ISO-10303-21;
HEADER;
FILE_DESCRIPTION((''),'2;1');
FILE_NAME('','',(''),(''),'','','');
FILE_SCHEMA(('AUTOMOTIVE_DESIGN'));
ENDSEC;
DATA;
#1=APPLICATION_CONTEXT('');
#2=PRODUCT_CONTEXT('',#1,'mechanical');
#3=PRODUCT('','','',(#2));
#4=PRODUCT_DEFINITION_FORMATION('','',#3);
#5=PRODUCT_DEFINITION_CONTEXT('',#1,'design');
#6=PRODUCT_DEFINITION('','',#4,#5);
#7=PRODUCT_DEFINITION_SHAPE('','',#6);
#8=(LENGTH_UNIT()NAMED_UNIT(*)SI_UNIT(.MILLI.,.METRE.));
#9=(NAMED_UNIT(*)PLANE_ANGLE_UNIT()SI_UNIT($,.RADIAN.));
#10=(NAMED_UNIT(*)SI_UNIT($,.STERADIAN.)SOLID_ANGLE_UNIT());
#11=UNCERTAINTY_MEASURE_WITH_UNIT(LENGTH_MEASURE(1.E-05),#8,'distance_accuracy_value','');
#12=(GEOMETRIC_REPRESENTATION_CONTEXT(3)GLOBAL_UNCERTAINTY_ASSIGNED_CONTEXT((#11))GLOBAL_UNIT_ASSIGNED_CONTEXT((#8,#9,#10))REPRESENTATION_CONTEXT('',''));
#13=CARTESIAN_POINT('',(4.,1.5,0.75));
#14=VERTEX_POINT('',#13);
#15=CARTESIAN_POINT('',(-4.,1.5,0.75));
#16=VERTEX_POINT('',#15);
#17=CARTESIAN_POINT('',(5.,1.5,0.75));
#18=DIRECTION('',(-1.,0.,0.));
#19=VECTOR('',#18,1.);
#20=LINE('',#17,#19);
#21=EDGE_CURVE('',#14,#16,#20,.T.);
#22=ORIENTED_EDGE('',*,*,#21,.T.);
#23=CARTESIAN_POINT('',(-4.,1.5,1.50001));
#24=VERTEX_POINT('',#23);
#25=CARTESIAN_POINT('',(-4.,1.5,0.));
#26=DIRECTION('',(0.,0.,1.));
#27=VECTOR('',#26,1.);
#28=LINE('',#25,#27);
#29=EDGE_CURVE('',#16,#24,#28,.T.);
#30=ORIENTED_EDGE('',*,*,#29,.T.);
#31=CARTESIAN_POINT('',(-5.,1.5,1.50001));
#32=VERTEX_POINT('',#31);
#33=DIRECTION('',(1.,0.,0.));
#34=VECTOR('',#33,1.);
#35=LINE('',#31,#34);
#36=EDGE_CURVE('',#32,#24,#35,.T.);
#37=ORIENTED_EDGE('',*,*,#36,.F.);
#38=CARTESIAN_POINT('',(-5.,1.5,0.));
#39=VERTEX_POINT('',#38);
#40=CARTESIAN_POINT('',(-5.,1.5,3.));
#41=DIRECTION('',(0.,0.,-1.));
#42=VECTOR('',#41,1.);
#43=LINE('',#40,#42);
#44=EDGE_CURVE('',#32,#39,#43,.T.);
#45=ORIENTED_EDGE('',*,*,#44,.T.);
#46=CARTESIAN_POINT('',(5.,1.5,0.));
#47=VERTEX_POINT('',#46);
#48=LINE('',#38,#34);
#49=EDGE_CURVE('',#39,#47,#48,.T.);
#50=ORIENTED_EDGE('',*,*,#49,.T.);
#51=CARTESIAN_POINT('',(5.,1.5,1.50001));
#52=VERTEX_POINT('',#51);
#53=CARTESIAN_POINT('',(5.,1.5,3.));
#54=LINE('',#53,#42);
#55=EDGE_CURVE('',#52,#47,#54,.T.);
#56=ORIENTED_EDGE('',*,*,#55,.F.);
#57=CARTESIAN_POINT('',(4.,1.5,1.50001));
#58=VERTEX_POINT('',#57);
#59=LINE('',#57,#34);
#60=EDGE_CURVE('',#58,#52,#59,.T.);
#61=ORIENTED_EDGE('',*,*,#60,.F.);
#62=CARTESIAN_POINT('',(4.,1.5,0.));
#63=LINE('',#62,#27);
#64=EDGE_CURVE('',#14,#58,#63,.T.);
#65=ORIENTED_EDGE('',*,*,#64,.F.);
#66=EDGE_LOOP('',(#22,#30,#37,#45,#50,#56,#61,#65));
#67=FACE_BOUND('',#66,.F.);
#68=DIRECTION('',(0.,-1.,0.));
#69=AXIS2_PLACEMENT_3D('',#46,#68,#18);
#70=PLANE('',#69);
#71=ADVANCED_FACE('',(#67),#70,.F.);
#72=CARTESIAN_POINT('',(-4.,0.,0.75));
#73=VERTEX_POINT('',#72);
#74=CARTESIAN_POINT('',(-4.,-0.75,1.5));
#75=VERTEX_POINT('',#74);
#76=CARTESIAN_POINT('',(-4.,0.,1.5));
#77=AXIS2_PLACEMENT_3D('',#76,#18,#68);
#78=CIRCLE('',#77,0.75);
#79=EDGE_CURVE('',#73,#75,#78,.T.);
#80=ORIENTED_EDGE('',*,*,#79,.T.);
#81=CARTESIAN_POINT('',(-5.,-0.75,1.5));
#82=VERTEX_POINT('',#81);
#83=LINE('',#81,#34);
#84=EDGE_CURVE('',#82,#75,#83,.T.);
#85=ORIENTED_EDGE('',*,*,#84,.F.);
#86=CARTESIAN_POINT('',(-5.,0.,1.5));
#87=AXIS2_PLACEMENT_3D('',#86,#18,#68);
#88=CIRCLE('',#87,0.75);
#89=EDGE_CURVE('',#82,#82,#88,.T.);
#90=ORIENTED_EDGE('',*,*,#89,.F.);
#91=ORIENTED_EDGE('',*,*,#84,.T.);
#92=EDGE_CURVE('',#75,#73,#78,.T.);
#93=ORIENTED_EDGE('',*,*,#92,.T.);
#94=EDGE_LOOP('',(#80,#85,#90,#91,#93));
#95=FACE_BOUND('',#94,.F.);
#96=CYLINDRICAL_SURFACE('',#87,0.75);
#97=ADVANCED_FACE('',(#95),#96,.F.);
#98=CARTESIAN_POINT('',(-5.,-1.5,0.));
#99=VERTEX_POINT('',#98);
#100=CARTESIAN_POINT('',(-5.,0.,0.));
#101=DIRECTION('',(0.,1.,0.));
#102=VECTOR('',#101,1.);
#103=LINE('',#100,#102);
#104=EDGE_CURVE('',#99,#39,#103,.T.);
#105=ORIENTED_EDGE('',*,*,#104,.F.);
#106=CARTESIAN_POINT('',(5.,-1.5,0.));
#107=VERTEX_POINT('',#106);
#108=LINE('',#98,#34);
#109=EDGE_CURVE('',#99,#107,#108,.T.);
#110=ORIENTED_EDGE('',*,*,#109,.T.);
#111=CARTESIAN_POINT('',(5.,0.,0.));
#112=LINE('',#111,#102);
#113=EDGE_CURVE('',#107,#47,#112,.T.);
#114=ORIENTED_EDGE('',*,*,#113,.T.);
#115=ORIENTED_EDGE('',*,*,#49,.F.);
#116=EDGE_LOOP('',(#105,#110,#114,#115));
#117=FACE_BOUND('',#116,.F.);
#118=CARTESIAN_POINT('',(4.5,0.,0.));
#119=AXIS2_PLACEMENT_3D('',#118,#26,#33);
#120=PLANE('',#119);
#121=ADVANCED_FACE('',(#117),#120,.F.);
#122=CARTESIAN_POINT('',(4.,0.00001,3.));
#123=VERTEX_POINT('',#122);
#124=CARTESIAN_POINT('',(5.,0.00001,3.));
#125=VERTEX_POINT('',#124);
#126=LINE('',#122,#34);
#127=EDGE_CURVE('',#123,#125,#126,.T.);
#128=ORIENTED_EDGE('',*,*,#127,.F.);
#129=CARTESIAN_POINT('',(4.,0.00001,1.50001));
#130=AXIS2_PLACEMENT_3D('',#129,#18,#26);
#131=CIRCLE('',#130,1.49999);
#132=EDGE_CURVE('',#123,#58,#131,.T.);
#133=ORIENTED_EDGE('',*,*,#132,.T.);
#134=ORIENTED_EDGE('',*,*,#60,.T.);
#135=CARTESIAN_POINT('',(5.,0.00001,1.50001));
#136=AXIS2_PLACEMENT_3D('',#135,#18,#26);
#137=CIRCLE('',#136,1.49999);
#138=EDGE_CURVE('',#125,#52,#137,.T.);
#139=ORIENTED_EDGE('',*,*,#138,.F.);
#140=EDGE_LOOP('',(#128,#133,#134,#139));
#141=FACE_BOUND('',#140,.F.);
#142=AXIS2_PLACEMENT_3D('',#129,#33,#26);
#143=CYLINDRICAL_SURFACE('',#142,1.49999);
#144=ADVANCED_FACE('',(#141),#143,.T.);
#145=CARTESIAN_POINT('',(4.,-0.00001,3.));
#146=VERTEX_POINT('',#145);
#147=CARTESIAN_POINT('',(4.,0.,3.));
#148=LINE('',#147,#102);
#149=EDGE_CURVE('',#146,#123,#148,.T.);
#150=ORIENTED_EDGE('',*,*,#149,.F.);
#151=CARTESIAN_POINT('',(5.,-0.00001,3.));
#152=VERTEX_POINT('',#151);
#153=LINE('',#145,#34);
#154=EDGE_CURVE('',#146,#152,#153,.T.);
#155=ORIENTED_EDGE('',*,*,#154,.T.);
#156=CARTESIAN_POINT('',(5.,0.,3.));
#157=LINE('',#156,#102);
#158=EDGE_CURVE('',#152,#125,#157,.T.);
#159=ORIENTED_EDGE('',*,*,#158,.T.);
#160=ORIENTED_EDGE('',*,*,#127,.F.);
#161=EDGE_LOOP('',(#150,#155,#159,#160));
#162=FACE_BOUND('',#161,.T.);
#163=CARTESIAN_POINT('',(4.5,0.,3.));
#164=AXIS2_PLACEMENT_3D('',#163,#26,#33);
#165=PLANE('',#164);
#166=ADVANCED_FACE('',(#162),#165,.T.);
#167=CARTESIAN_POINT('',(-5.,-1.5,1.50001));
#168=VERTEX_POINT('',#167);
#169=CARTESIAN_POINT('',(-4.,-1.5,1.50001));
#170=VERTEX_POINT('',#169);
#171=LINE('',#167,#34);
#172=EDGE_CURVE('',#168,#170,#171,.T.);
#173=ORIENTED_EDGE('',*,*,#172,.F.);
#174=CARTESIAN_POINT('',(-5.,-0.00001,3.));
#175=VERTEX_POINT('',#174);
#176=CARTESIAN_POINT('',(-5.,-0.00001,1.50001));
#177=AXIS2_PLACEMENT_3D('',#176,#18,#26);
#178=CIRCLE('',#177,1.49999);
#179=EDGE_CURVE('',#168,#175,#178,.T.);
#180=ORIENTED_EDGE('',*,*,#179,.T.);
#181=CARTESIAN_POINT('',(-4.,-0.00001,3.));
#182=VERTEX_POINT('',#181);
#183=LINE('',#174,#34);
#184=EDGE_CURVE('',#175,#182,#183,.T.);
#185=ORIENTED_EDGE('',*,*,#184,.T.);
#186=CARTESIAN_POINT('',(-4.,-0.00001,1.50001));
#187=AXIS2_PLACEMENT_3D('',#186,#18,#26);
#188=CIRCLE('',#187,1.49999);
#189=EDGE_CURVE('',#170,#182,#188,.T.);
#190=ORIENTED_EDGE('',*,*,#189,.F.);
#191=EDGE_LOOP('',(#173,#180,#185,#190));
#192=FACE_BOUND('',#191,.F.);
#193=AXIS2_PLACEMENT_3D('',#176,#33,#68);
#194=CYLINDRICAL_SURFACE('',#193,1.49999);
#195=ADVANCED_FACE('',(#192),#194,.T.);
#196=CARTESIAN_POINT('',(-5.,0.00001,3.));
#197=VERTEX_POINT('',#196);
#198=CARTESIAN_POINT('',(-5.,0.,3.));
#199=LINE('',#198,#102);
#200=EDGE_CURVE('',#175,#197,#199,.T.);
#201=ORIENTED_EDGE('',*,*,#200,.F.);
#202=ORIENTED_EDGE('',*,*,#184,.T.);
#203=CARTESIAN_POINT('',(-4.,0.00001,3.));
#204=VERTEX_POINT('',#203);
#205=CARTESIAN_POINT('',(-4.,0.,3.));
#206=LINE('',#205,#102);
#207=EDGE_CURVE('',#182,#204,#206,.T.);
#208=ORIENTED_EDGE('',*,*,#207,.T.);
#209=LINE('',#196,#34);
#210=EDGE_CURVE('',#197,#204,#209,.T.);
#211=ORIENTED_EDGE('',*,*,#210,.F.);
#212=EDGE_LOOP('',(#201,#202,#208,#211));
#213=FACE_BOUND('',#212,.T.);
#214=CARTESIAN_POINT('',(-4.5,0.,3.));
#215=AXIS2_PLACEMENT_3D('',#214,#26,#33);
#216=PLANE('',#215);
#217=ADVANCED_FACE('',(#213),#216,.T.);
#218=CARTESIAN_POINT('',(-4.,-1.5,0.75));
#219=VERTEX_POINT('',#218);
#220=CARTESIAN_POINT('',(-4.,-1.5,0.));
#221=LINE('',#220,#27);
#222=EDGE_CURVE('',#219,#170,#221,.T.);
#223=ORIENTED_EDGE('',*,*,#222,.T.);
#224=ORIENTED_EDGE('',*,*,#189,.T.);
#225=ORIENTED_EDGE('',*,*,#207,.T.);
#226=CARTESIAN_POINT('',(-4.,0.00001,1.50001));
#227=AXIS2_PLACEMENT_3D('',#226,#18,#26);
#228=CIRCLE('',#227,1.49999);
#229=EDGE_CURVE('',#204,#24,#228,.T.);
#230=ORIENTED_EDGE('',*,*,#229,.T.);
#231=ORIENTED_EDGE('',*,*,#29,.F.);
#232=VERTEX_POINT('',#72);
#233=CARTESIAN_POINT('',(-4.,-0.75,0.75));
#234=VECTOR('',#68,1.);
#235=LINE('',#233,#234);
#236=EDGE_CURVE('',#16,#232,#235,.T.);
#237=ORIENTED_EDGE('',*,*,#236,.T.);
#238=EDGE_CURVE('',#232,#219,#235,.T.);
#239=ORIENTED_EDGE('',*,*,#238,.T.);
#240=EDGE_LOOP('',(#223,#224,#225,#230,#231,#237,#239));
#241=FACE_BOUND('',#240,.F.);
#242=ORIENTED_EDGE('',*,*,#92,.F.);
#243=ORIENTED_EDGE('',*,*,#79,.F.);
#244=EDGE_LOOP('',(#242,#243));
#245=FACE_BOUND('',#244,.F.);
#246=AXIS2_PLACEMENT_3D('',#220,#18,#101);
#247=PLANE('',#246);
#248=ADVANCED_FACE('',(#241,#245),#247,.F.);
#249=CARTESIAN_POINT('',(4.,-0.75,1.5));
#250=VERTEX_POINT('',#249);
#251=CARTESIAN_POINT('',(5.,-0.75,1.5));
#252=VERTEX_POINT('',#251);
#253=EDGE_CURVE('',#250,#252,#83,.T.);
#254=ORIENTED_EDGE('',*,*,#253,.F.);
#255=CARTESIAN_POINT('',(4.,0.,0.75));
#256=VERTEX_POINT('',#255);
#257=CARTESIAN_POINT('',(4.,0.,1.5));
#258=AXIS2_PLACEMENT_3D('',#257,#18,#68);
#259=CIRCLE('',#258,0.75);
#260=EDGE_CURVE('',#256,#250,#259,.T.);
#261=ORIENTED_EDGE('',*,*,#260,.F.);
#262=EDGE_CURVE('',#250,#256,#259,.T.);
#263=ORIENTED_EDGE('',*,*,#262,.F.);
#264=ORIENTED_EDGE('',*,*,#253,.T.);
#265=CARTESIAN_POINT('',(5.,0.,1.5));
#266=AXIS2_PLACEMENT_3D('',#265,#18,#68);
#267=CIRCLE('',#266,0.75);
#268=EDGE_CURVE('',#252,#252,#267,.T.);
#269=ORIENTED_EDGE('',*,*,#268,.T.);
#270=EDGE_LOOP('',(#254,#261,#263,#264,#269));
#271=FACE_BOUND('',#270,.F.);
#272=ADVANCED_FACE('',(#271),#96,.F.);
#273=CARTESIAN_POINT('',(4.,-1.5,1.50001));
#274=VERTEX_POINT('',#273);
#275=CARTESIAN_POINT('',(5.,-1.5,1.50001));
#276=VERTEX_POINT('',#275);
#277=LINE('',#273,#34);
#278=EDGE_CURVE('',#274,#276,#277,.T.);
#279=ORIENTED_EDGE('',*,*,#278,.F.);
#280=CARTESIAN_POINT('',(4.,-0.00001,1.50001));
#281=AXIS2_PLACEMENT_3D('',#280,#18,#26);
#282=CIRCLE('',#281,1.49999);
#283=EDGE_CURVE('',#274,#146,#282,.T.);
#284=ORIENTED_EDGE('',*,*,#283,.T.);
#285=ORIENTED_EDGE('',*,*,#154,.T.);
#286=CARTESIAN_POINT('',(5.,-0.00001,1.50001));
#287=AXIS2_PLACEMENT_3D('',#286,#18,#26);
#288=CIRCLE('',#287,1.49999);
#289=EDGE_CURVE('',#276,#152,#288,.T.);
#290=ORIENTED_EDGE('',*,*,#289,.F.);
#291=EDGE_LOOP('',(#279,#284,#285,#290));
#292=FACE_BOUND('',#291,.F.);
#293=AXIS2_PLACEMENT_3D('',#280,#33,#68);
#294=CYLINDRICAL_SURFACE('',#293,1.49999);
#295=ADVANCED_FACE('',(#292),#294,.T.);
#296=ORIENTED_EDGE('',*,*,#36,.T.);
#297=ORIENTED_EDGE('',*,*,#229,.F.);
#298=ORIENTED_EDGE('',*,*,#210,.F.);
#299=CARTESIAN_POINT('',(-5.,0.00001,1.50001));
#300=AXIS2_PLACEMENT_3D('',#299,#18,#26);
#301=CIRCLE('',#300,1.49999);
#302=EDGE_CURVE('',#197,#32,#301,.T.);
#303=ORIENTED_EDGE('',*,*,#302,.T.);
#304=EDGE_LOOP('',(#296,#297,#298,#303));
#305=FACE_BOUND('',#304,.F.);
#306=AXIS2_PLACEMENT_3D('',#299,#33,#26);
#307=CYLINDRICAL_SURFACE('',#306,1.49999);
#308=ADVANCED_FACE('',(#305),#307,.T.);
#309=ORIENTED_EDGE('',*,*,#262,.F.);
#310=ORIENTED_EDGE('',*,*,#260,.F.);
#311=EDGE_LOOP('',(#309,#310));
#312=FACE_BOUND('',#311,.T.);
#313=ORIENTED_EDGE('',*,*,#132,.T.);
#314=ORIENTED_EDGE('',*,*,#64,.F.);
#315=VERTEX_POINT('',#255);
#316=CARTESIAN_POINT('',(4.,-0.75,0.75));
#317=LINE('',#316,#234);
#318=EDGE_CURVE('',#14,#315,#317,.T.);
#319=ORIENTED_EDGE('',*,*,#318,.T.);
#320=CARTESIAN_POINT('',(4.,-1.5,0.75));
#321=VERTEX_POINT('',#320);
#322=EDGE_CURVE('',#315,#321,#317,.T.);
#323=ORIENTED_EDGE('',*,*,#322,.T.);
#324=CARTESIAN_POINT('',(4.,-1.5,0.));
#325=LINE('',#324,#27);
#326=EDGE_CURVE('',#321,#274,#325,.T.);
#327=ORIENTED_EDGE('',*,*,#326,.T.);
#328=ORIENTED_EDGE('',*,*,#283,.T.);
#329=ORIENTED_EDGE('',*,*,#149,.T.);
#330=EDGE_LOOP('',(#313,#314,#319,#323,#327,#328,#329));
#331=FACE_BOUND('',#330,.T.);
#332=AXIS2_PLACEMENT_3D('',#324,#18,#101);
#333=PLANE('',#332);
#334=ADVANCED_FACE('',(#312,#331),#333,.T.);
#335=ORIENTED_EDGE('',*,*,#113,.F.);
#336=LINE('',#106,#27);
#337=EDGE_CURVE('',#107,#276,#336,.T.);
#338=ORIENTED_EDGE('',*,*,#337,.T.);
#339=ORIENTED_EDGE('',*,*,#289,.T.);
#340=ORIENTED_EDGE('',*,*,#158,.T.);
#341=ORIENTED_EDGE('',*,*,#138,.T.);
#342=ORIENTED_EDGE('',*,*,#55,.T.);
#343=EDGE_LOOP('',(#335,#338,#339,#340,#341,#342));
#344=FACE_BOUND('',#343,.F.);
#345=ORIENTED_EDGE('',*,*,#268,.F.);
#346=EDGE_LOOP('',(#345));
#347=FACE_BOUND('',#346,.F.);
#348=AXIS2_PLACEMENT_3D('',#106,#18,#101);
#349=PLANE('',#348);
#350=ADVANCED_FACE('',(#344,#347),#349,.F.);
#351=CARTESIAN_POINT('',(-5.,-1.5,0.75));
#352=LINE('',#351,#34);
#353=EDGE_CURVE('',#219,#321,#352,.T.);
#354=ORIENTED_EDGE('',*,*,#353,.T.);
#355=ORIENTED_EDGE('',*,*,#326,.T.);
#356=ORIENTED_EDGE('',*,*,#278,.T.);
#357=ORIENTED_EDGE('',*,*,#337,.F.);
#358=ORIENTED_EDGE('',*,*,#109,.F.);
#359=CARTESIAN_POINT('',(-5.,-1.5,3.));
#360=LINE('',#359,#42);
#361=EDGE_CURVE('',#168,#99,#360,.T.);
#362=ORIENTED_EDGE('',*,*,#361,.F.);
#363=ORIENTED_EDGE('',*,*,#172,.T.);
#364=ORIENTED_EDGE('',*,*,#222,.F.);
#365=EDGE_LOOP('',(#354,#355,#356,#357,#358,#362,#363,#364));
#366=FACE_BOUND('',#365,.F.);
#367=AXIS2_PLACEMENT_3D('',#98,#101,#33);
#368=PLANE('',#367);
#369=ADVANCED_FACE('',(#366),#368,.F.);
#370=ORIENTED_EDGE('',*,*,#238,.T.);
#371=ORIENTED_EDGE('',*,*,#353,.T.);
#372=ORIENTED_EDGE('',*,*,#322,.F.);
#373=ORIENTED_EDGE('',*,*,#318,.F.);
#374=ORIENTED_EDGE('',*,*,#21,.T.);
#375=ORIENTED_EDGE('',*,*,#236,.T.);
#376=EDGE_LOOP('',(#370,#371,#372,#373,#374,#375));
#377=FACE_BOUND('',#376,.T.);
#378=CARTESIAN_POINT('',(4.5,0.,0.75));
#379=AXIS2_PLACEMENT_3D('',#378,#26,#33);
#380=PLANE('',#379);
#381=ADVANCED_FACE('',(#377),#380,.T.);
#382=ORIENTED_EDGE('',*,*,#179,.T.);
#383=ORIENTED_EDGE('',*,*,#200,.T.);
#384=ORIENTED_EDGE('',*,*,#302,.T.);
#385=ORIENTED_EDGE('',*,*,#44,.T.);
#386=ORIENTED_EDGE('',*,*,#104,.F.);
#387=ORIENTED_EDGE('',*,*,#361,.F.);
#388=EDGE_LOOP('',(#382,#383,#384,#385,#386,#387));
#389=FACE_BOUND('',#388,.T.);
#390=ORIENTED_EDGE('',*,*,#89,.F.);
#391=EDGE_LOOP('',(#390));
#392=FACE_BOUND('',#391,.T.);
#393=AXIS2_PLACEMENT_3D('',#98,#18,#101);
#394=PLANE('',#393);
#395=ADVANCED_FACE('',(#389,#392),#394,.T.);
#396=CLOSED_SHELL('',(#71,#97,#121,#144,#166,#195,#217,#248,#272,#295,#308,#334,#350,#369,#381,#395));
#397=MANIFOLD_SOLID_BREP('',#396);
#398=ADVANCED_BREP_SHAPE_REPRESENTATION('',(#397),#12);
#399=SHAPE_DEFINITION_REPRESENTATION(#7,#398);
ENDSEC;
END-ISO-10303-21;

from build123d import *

# Parameters (mm, degrees)
F1_W     = 1
F1_H     = 3
F1_W_2   = 8
F2_DEPTH = 0.75
F3_DEPTH = 3
F4_R     = 0.75
F5_DEPTH = 10
F6_R     = 1.49999


# Not quite as in the source:
# - a fillet or chamfer is up to 0.001 mm smaller than in the source, because OpenCascade refuses the exact size


with BuildPart() as f2:
    # F1 (on Top) → F2 (new body)
    with BuildSketch(Plane.XY):
        with Locations((4.5, 0)):
            Rectangle(F1_W, F1_H)
        with Locations((-4.5, 0)):
            Rectangle(F1_W, F1_H)
        Rectangle(F1_W_2, F1_H)
    extrude(amount=F2_DEPTH)

    # F1 (on Top) → F3 (join)
    with BuildSketch(Plane.XY):
        with Locations((-4.5, 0)):
            Rectangle(F1_W, F1_H)
        with Locations((4.5, 0)):
            Rectangle(F1_W, F1_H)
    extrude(amount=F3_DEPTH)

    # F4 (on face) → F5 (cut, through all)
    with BuildSketch(Plane(origin=(-5, 0, 0), x_dir=(0, -1, 0), z_dir=(-1, 0, 0))):
        with Locations((0, 1.5)):
            Circle(F4_R)
    extrude(amount=-F5_DEPTH, mode=Mode.SUBTRACT)

    # F6 (radius 1.5 in the source; OpenCascade refuses exactly that, so slightly less here)
    f6_edges = [f2.edges().sort_by_distance(p)[0] for p in [
        (4.5, 1.5, 3),
        (4.5, -1.5, 3),
        (-4.5, -1.5, 3),
        (-4.5, 1.5, 3),
    ]]
    fillet(f6_edges, radius=F6_R)


solid = f2.part
